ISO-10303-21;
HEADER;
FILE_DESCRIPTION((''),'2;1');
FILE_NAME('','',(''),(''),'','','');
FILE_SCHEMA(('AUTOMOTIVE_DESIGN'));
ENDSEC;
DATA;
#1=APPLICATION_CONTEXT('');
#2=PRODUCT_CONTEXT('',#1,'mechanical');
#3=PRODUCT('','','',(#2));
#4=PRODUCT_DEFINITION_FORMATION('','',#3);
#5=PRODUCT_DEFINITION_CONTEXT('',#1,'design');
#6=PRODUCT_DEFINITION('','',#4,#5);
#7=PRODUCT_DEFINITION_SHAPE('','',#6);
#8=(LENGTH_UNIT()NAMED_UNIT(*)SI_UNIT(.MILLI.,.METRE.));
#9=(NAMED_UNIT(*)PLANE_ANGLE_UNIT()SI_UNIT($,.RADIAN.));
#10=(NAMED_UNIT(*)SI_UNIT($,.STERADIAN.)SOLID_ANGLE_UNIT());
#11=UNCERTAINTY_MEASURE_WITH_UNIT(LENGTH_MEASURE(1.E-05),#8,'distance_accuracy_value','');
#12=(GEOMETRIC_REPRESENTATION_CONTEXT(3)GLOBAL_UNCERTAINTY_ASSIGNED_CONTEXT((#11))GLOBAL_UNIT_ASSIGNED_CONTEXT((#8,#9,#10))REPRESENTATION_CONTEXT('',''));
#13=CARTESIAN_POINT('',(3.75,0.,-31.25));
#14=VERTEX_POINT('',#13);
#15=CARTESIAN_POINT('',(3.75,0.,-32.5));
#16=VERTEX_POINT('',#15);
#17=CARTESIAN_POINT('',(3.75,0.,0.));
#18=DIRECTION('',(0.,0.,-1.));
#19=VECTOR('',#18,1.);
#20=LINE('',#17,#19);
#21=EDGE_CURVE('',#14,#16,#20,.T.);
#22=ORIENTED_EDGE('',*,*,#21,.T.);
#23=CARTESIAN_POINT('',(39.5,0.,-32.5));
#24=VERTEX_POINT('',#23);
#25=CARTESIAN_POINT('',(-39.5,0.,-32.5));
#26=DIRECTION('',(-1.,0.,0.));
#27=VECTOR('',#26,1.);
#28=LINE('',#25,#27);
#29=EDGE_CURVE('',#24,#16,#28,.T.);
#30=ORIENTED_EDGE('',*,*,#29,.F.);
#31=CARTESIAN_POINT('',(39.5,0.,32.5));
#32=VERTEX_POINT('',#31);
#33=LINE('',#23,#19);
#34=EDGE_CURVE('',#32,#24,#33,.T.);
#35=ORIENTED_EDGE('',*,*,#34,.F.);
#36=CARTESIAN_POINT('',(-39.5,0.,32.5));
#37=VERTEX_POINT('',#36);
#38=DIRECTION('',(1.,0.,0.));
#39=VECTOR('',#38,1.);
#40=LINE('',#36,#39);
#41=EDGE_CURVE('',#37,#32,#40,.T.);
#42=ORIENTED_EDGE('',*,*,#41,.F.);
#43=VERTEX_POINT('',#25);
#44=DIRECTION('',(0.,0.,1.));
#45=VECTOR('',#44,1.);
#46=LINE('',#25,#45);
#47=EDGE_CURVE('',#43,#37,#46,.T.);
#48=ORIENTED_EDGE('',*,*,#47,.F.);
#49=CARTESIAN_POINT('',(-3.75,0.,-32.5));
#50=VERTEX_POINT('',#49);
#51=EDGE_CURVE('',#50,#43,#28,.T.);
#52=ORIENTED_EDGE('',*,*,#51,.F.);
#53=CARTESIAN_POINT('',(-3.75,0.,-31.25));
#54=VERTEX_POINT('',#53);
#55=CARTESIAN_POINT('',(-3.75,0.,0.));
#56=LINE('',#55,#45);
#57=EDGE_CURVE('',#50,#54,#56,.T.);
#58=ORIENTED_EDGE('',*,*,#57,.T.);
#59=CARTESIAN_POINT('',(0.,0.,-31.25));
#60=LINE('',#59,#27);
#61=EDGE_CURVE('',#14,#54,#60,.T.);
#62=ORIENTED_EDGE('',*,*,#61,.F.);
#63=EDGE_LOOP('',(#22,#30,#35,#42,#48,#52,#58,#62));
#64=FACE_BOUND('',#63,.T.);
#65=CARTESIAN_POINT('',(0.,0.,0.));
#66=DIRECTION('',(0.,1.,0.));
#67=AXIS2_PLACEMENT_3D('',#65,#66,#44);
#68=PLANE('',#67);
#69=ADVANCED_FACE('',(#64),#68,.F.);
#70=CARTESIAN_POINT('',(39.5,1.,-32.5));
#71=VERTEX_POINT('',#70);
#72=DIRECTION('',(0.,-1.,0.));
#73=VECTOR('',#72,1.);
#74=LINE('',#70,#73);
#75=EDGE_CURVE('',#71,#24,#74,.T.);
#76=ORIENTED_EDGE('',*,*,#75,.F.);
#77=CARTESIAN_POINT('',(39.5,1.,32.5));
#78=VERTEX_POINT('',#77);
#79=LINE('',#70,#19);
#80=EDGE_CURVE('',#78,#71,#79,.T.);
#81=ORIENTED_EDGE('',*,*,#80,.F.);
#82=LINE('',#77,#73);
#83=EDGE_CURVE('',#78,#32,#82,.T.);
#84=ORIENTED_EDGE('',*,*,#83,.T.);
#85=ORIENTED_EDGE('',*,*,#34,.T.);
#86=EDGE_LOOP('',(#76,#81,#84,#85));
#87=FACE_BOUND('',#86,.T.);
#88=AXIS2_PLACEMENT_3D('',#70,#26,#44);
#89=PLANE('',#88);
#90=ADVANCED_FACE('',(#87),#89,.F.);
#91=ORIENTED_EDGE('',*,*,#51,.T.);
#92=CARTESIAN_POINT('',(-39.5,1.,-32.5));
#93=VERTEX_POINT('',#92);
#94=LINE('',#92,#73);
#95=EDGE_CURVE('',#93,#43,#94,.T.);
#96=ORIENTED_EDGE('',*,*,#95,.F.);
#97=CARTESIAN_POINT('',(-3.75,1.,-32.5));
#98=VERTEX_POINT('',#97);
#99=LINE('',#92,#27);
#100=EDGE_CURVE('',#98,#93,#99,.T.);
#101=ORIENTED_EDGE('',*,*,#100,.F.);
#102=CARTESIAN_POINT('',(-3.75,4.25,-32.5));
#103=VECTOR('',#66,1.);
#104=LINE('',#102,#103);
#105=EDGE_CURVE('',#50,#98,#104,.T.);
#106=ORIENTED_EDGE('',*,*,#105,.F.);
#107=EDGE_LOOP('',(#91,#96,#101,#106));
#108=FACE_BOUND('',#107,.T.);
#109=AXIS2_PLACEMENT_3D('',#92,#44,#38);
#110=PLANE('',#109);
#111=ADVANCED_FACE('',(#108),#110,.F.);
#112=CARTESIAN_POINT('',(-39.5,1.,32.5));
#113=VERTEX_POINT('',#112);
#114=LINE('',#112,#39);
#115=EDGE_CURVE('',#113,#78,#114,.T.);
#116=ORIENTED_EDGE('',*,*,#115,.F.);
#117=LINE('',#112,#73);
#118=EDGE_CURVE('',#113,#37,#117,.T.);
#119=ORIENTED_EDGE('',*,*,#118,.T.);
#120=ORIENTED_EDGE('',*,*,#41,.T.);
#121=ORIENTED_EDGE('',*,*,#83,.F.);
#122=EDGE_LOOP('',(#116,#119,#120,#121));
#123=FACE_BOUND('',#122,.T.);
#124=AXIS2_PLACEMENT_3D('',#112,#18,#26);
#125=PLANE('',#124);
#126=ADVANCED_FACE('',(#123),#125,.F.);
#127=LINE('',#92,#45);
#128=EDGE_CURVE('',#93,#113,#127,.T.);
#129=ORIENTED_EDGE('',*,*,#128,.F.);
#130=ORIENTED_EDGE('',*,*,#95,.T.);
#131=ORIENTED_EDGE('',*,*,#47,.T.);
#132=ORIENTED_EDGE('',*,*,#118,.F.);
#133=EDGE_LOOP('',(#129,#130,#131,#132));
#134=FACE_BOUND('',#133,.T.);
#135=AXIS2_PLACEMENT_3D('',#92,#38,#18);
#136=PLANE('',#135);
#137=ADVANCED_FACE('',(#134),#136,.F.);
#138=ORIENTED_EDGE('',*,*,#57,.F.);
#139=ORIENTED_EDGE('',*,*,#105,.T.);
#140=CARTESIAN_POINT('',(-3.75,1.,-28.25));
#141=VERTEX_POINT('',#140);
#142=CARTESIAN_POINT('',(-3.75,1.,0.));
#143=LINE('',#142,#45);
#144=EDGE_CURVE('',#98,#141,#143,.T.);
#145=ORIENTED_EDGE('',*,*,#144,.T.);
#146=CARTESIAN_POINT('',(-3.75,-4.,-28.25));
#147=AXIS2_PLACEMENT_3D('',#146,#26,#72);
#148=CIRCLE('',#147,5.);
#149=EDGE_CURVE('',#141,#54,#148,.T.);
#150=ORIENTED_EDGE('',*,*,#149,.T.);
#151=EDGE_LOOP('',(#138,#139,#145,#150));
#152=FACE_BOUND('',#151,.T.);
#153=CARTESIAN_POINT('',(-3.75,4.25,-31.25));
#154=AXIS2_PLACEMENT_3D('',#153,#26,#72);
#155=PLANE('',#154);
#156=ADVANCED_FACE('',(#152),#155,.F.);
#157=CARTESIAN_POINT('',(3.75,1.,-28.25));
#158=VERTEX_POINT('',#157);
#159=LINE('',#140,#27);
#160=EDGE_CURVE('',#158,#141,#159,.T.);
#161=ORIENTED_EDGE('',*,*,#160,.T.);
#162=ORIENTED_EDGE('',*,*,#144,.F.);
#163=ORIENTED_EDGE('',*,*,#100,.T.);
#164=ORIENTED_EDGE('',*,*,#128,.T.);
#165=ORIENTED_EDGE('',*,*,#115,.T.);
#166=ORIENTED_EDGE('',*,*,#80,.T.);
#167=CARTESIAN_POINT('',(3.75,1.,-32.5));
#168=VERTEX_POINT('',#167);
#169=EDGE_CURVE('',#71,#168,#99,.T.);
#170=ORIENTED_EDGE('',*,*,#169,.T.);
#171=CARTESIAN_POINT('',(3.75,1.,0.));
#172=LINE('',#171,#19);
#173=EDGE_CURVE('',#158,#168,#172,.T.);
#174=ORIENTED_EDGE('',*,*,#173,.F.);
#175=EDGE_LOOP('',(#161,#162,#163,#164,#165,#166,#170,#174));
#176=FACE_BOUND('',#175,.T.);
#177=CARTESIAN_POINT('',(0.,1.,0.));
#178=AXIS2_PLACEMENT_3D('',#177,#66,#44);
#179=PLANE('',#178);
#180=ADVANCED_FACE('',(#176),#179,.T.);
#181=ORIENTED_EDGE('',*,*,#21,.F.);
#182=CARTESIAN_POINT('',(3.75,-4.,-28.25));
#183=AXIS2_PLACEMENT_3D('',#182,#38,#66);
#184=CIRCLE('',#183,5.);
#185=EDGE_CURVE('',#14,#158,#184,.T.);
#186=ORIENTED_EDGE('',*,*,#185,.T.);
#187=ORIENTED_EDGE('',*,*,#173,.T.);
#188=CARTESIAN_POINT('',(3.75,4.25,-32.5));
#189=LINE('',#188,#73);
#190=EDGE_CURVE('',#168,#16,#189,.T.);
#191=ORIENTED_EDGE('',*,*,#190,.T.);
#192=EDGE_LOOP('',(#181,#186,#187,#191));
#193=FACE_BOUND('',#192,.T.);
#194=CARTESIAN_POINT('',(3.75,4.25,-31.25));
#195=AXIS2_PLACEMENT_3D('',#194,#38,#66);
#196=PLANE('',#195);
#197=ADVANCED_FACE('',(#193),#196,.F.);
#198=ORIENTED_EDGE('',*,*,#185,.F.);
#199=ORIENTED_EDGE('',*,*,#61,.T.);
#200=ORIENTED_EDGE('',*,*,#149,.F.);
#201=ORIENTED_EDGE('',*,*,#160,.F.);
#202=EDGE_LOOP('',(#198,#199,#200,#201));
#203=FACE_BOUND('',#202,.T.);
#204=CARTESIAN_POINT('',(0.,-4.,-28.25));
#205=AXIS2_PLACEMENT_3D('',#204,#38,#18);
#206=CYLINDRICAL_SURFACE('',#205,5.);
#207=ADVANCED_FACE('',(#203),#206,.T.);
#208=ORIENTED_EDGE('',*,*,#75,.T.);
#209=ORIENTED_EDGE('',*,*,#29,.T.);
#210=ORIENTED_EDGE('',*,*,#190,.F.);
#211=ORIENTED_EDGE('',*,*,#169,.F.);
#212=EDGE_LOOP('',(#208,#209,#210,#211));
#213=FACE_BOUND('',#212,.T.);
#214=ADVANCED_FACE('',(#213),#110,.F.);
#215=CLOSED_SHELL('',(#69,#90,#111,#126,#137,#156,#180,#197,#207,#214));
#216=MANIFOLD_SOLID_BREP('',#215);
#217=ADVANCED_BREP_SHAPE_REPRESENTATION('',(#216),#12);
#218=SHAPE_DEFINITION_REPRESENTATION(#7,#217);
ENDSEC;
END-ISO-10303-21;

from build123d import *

# Parameters (mm, degrees)
ESQUISSE1_W             = 79
ESQUISSE1_H             = 65
BOSS_EXTRU_1_DEPTH      = 1
ESQUISSE3_W             = 7.5
ESQUISSE3_H             = 7.5
ENL_V_MAT_EXTRU_1_DEPTH = 1.25
CONG_1_R                = 5


with BuildPart() as part:
    # Esquisse1 → Boss.-Extru.1 (new body)
    with BuildSketch(Plane(origin=(0, 0, 0), x_dir=(1, 0, 0), z_dir=(0, 1, 0))):
        Rectangle(ESQUISSE1_W, ESQUISSE1_H)
    extrude(amount=BOSS_EXTRU_1_DEPTH)

    # Esquisse3 → Enlèv. mat.-Extru.1 (cut)
    with BuildSketch(Plane(origin=(0, 0, -32.5), x_dir=(-1, 0, 0), z_dir=(0, 0, -1))):
        with Locations((0, 0.5)):
            Rectangle(ESQUISSE3_W, ESQUISSE3_H)
    extrude(amount=-ENL_V_MAT_EXTRU_1_DEPTH, mode=Mode.SUBTRACT)

    # Congé1
    # the kernel refuses this fillet: 5 mm, written as the material it takes off along each edge
    with BuildSketch(Plane(origin=(3.75, 1, -31.25), x_dir=(0, 0, 1), z_dir=(-1, 0, 0))) as cong_1_piece_1:
        with BuildLine():
            CenterArc((3, -5), CONG_1_R, 90, 36.869897646)
            Line((0, -1), (-0.06, -0.92))
            ThreePointArc((-0.06, -0.92), (-0.1, -0.5), (-0.1, 0))
            Line((-0.1, 0), (0, 0.1))
            Line((0, 0.1), (3, 0.1))
            Line((3, 0.1), (3, 0))
        make_face()
    extrude(amount=7.5, mode=Mode.SUBTRACT)


solid = part.part
